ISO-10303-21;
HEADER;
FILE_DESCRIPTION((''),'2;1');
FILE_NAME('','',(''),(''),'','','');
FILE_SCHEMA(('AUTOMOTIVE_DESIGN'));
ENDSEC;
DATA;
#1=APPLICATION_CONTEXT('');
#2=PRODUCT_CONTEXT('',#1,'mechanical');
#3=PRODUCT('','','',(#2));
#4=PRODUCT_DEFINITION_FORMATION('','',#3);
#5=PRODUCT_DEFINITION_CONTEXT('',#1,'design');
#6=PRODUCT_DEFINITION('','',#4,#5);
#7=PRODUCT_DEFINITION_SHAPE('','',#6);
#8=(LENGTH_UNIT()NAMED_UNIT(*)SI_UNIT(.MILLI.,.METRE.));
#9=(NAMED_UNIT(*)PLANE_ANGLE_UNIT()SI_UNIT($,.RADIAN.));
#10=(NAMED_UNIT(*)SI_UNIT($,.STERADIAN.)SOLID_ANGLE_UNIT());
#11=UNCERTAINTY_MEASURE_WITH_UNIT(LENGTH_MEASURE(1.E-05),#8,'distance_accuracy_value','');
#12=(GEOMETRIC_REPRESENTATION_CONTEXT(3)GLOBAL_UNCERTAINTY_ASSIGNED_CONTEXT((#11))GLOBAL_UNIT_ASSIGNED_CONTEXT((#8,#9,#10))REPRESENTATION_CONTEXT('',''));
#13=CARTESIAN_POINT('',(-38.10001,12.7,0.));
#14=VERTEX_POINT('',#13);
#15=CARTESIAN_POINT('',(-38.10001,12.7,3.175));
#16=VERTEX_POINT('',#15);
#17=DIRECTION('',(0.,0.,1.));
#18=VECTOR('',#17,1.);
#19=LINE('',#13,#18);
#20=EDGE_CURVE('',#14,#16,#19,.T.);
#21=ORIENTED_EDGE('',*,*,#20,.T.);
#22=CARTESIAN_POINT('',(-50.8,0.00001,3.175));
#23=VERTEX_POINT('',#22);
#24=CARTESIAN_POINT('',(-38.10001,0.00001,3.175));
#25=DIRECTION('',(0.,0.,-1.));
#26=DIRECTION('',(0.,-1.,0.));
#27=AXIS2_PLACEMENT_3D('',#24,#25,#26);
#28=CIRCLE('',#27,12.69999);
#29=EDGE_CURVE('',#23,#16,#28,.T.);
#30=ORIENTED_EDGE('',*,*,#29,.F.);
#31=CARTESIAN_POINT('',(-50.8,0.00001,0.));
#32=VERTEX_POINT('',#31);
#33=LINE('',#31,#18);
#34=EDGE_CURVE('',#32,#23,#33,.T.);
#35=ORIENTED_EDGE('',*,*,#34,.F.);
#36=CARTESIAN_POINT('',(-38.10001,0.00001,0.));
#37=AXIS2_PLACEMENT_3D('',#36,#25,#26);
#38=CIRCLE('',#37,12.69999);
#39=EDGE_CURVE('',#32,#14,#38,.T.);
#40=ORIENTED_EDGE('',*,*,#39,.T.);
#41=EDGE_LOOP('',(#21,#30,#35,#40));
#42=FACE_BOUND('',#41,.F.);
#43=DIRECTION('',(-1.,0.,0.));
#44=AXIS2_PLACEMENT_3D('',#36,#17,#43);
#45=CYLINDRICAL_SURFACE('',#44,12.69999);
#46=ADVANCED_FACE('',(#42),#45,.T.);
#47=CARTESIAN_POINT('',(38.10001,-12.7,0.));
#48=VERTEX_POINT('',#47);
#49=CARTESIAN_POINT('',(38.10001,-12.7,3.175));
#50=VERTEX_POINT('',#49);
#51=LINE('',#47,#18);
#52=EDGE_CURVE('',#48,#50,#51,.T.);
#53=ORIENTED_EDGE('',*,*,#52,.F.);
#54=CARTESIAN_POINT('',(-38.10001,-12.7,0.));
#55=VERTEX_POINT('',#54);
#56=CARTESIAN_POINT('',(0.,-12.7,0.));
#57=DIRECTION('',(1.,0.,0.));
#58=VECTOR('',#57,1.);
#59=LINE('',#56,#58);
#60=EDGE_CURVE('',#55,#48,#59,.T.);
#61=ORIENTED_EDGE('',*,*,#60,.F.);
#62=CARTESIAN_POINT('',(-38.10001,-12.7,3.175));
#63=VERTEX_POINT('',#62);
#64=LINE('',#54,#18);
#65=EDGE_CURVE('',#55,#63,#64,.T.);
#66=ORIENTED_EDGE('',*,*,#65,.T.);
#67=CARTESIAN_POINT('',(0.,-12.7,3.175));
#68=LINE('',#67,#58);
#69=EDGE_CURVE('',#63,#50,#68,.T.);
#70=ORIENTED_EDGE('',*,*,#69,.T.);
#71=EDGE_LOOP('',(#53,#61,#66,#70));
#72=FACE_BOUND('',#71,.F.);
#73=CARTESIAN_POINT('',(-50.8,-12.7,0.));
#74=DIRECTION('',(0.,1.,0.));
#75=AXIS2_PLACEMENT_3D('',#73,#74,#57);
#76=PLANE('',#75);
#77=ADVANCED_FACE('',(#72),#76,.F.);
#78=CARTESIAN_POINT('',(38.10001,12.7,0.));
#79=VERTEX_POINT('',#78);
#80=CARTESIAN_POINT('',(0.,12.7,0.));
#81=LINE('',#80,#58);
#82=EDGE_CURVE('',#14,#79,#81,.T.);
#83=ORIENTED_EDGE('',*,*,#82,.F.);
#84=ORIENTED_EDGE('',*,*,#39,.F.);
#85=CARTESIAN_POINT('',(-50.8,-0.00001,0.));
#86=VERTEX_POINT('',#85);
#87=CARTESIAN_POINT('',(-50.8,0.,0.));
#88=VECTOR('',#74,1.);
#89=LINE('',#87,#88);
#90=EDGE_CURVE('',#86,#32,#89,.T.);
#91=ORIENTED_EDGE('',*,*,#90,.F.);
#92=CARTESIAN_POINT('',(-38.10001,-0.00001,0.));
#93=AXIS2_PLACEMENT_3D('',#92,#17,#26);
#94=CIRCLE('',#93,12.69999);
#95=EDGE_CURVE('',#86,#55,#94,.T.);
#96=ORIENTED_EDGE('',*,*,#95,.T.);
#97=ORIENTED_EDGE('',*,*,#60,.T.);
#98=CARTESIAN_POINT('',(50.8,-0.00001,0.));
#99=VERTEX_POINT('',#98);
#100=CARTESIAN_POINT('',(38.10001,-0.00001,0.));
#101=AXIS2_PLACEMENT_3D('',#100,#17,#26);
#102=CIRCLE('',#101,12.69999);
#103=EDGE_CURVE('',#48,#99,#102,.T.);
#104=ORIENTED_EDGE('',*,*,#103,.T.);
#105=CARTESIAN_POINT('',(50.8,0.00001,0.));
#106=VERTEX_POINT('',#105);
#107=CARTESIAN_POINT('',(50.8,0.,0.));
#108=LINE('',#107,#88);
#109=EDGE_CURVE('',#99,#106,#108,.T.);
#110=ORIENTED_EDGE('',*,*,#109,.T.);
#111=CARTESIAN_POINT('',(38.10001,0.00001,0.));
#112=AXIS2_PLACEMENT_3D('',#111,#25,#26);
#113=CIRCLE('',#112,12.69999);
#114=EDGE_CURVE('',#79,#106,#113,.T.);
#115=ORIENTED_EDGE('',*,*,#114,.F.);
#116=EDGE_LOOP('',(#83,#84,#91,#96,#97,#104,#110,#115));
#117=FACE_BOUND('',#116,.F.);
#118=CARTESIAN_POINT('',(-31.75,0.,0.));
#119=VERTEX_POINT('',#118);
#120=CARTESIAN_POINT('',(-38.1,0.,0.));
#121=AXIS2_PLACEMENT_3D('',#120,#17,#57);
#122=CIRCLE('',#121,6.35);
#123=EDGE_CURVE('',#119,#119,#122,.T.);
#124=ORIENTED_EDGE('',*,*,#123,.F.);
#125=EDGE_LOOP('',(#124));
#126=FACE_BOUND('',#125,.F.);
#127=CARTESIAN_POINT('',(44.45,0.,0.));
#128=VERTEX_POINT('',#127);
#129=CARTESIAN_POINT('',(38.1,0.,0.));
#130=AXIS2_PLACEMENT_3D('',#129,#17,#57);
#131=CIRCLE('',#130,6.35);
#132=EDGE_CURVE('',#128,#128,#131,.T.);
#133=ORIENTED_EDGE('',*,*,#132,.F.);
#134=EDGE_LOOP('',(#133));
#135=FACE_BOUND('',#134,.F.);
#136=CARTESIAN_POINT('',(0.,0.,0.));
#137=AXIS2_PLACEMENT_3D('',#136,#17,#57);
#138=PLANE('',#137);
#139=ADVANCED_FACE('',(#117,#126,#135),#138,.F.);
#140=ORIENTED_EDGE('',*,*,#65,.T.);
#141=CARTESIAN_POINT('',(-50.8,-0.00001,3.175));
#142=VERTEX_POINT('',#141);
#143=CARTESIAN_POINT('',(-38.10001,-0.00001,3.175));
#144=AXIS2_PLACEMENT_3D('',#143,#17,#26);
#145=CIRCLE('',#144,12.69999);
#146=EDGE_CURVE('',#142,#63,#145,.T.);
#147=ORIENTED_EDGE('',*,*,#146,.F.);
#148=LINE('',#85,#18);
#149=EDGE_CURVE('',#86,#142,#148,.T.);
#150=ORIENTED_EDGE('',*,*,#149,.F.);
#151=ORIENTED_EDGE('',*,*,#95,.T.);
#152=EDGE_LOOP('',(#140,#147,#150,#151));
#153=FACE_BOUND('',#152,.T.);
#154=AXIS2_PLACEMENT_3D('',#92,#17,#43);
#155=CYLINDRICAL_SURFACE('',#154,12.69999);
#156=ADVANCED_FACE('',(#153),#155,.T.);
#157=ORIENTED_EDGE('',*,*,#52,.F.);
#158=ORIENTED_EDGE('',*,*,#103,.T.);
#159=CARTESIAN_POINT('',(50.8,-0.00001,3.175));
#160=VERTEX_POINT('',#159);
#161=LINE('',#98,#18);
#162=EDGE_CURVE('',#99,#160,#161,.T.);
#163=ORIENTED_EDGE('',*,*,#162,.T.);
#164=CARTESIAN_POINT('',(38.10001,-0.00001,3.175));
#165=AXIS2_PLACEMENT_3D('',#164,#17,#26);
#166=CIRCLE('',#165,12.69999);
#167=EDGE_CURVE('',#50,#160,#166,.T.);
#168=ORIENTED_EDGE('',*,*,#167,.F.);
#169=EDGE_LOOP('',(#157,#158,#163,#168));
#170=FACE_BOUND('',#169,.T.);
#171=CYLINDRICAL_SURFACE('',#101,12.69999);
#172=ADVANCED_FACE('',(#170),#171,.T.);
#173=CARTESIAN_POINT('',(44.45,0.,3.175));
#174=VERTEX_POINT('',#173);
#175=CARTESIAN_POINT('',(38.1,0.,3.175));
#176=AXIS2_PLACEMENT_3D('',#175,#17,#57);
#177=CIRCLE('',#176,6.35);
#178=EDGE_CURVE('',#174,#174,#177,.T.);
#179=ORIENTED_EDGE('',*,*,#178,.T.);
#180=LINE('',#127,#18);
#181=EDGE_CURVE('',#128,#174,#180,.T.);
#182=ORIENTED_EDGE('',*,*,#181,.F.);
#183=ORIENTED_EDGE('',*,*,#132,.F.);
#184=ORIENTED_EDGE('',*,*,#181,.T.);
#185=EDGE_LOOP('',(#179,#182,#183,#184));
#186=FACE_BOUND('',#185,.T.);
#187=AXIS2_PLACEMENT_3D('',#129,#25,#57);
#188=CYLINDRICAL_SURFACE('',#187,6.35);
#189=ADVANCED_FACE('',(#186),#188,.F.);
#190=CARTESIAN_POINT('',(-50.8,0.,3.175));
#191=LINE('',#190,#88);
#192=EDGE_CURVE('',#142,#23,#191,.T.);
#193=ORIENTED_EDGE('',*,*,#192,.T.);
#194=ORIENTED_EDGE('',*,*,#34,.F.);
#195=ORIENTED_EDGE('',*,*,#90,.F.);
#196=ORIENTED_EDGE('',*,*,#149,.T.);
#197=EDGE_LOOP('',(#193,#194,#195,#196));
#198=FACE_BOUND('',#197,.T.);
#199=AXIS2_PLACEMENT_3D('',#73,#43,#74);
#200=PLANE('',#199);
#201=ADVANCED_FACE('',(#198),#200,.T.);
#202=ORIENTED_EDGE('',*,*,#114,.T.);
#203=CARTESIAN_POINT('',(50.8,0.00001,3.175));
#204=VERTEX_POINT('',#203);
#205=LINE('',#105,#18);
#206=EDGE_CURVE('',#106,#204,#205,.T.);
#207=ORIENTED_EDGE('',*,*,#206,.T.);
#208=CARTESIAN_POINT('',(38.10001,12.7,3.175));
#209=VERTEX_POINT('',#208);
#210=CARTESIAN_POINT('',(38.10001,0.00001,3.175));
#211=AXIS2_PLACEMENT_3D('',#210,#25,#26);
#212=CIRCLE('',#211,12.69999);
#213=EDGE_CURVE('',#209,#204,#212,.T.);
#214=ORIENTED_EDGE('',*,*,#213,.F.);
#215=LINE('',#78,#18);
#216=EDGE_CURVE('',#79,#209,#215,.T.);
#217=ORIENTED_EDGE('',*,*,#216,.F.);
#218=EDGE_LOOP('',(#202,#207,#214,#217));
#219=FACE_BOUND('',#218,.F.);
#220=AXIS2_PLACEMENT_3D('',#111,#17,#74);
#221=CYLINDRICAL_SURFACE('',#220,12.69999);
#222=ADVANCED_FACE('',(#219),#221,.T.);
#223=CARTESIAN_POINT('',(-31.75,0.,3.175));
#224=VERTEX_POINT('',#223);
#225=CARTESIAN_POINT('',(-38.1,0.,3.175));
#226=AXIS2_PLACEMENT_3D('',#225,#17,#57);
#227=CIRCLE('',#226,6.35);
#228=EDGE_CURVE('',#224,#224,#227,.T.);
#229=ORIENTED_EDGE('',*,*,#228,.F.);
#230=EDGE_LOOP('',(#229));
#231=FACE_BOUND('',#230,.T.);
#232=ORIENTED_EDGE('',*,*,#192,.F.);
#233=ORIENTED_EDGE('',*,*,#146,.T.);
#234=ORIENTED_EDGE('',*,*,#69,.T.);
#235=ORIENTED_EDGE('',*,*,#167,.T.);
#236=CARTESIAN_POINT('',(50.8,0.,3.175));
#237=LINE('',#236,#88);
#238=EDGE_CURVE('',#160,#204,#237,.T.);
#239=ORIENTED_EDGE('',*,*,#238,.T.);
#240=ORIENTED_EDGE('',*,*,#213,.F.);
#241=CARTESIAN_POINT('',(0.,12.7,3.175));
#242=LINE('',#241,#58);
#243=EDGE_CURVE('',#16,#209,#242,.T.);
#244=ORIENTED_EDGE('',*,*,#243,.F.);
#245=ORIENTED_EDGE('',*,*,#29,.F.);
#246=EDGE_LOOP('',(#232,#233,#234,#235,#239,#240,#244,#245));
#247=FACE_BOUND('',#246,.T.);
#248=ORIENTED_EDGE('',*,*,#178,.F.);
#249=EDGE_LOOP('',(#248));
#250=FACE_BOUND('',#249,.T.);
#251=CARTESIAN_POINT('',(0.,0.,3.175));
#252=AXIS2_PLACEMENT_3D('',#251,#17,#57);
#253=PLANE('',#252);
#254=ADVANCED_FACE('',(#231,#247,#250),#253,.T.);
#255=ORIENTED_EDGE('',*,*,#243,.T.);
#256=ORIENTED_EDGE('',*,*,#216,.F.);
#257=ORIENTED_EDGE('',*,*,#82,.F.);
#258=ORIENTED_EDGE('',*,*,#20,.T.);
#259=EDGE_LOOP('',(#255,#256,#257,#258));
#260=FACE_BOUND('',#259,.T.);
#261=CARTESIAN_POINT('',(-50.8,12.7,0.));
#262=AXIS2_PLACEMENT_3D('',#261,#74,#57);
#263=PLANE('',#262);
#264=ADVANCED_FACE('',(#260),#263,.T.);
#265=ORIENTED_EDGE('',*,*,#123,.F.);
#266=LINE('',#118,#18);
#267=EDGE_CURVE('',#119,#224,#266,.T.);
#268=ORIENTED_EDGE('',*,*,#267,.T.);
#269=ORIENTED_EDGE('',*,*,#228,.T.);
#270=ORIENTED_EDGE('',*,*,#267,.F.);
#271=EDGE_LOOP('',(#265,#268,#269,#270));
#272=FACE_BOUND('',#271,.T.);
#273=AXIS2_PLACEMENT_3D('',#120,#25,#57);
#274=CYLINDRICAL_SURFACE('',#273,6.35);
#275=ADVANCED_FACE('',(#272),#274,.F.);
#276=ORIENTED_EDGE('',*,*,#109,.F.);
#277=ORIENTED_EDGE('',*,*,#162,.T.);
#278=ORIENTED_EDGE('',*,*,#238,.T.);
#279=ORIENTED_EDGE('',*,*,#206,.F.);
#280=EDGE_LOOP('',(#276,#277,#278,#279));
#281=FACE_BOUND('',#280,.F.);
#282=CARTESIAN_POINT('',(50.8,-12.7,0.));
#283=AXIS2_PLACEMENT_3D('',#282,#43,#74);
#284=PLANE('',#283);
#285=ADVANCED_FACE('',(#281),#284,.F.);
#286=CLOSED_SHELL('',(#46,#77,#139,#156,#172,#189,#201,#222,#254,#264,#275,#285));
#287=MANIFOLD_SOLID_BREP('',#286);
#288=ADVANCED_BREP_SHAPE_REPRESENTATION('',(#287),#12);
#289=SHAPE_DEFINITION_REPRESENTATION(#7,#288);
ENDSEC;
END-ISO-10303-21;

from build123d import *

# Parameters (mm, degrees)
F0_W     = 101.6
F0_H     = 25.4
F0_R     = 6.35
F1_DEPTH = 3.175
F2_R     = 12.69999


# Not quite as in the source:
# - a fillet or chamfer is up to 0.001 mm smaller than in the source, because OpenCascade refuses the exact size


with BuildPart() as f1:
    # F0 (on Top) → F1 (new body)
    with BuildSketch(Plane.XY):
        Rectangle(F0_W, F0_H)
        with Locations((-38.1, 0)):
            Circle(F0_R, mode=Mode.SUBTRACT)
        with Locations((38.1, 0)):
            Circle(F0_R, mode=Mode.SUBTRACT)
    extrude(amount=F1_DEPTH)

    # F2 (radius 12.7 in the source; OpenCascade refuses exactly that, so slightly less here)
    f2_edges = [f1.edges().sort_by_distance(p)[0] for p in [
        (-50.8, -12.7, 1.5875),
        (50.8, -12.7, 1.5875),
        (-50.8, 12.7, 1.5875),
        (50.8, 12.7, 1.5875),
    ]]
    fillet(f2_edges, radius=F2_R)


solid = f1.part
